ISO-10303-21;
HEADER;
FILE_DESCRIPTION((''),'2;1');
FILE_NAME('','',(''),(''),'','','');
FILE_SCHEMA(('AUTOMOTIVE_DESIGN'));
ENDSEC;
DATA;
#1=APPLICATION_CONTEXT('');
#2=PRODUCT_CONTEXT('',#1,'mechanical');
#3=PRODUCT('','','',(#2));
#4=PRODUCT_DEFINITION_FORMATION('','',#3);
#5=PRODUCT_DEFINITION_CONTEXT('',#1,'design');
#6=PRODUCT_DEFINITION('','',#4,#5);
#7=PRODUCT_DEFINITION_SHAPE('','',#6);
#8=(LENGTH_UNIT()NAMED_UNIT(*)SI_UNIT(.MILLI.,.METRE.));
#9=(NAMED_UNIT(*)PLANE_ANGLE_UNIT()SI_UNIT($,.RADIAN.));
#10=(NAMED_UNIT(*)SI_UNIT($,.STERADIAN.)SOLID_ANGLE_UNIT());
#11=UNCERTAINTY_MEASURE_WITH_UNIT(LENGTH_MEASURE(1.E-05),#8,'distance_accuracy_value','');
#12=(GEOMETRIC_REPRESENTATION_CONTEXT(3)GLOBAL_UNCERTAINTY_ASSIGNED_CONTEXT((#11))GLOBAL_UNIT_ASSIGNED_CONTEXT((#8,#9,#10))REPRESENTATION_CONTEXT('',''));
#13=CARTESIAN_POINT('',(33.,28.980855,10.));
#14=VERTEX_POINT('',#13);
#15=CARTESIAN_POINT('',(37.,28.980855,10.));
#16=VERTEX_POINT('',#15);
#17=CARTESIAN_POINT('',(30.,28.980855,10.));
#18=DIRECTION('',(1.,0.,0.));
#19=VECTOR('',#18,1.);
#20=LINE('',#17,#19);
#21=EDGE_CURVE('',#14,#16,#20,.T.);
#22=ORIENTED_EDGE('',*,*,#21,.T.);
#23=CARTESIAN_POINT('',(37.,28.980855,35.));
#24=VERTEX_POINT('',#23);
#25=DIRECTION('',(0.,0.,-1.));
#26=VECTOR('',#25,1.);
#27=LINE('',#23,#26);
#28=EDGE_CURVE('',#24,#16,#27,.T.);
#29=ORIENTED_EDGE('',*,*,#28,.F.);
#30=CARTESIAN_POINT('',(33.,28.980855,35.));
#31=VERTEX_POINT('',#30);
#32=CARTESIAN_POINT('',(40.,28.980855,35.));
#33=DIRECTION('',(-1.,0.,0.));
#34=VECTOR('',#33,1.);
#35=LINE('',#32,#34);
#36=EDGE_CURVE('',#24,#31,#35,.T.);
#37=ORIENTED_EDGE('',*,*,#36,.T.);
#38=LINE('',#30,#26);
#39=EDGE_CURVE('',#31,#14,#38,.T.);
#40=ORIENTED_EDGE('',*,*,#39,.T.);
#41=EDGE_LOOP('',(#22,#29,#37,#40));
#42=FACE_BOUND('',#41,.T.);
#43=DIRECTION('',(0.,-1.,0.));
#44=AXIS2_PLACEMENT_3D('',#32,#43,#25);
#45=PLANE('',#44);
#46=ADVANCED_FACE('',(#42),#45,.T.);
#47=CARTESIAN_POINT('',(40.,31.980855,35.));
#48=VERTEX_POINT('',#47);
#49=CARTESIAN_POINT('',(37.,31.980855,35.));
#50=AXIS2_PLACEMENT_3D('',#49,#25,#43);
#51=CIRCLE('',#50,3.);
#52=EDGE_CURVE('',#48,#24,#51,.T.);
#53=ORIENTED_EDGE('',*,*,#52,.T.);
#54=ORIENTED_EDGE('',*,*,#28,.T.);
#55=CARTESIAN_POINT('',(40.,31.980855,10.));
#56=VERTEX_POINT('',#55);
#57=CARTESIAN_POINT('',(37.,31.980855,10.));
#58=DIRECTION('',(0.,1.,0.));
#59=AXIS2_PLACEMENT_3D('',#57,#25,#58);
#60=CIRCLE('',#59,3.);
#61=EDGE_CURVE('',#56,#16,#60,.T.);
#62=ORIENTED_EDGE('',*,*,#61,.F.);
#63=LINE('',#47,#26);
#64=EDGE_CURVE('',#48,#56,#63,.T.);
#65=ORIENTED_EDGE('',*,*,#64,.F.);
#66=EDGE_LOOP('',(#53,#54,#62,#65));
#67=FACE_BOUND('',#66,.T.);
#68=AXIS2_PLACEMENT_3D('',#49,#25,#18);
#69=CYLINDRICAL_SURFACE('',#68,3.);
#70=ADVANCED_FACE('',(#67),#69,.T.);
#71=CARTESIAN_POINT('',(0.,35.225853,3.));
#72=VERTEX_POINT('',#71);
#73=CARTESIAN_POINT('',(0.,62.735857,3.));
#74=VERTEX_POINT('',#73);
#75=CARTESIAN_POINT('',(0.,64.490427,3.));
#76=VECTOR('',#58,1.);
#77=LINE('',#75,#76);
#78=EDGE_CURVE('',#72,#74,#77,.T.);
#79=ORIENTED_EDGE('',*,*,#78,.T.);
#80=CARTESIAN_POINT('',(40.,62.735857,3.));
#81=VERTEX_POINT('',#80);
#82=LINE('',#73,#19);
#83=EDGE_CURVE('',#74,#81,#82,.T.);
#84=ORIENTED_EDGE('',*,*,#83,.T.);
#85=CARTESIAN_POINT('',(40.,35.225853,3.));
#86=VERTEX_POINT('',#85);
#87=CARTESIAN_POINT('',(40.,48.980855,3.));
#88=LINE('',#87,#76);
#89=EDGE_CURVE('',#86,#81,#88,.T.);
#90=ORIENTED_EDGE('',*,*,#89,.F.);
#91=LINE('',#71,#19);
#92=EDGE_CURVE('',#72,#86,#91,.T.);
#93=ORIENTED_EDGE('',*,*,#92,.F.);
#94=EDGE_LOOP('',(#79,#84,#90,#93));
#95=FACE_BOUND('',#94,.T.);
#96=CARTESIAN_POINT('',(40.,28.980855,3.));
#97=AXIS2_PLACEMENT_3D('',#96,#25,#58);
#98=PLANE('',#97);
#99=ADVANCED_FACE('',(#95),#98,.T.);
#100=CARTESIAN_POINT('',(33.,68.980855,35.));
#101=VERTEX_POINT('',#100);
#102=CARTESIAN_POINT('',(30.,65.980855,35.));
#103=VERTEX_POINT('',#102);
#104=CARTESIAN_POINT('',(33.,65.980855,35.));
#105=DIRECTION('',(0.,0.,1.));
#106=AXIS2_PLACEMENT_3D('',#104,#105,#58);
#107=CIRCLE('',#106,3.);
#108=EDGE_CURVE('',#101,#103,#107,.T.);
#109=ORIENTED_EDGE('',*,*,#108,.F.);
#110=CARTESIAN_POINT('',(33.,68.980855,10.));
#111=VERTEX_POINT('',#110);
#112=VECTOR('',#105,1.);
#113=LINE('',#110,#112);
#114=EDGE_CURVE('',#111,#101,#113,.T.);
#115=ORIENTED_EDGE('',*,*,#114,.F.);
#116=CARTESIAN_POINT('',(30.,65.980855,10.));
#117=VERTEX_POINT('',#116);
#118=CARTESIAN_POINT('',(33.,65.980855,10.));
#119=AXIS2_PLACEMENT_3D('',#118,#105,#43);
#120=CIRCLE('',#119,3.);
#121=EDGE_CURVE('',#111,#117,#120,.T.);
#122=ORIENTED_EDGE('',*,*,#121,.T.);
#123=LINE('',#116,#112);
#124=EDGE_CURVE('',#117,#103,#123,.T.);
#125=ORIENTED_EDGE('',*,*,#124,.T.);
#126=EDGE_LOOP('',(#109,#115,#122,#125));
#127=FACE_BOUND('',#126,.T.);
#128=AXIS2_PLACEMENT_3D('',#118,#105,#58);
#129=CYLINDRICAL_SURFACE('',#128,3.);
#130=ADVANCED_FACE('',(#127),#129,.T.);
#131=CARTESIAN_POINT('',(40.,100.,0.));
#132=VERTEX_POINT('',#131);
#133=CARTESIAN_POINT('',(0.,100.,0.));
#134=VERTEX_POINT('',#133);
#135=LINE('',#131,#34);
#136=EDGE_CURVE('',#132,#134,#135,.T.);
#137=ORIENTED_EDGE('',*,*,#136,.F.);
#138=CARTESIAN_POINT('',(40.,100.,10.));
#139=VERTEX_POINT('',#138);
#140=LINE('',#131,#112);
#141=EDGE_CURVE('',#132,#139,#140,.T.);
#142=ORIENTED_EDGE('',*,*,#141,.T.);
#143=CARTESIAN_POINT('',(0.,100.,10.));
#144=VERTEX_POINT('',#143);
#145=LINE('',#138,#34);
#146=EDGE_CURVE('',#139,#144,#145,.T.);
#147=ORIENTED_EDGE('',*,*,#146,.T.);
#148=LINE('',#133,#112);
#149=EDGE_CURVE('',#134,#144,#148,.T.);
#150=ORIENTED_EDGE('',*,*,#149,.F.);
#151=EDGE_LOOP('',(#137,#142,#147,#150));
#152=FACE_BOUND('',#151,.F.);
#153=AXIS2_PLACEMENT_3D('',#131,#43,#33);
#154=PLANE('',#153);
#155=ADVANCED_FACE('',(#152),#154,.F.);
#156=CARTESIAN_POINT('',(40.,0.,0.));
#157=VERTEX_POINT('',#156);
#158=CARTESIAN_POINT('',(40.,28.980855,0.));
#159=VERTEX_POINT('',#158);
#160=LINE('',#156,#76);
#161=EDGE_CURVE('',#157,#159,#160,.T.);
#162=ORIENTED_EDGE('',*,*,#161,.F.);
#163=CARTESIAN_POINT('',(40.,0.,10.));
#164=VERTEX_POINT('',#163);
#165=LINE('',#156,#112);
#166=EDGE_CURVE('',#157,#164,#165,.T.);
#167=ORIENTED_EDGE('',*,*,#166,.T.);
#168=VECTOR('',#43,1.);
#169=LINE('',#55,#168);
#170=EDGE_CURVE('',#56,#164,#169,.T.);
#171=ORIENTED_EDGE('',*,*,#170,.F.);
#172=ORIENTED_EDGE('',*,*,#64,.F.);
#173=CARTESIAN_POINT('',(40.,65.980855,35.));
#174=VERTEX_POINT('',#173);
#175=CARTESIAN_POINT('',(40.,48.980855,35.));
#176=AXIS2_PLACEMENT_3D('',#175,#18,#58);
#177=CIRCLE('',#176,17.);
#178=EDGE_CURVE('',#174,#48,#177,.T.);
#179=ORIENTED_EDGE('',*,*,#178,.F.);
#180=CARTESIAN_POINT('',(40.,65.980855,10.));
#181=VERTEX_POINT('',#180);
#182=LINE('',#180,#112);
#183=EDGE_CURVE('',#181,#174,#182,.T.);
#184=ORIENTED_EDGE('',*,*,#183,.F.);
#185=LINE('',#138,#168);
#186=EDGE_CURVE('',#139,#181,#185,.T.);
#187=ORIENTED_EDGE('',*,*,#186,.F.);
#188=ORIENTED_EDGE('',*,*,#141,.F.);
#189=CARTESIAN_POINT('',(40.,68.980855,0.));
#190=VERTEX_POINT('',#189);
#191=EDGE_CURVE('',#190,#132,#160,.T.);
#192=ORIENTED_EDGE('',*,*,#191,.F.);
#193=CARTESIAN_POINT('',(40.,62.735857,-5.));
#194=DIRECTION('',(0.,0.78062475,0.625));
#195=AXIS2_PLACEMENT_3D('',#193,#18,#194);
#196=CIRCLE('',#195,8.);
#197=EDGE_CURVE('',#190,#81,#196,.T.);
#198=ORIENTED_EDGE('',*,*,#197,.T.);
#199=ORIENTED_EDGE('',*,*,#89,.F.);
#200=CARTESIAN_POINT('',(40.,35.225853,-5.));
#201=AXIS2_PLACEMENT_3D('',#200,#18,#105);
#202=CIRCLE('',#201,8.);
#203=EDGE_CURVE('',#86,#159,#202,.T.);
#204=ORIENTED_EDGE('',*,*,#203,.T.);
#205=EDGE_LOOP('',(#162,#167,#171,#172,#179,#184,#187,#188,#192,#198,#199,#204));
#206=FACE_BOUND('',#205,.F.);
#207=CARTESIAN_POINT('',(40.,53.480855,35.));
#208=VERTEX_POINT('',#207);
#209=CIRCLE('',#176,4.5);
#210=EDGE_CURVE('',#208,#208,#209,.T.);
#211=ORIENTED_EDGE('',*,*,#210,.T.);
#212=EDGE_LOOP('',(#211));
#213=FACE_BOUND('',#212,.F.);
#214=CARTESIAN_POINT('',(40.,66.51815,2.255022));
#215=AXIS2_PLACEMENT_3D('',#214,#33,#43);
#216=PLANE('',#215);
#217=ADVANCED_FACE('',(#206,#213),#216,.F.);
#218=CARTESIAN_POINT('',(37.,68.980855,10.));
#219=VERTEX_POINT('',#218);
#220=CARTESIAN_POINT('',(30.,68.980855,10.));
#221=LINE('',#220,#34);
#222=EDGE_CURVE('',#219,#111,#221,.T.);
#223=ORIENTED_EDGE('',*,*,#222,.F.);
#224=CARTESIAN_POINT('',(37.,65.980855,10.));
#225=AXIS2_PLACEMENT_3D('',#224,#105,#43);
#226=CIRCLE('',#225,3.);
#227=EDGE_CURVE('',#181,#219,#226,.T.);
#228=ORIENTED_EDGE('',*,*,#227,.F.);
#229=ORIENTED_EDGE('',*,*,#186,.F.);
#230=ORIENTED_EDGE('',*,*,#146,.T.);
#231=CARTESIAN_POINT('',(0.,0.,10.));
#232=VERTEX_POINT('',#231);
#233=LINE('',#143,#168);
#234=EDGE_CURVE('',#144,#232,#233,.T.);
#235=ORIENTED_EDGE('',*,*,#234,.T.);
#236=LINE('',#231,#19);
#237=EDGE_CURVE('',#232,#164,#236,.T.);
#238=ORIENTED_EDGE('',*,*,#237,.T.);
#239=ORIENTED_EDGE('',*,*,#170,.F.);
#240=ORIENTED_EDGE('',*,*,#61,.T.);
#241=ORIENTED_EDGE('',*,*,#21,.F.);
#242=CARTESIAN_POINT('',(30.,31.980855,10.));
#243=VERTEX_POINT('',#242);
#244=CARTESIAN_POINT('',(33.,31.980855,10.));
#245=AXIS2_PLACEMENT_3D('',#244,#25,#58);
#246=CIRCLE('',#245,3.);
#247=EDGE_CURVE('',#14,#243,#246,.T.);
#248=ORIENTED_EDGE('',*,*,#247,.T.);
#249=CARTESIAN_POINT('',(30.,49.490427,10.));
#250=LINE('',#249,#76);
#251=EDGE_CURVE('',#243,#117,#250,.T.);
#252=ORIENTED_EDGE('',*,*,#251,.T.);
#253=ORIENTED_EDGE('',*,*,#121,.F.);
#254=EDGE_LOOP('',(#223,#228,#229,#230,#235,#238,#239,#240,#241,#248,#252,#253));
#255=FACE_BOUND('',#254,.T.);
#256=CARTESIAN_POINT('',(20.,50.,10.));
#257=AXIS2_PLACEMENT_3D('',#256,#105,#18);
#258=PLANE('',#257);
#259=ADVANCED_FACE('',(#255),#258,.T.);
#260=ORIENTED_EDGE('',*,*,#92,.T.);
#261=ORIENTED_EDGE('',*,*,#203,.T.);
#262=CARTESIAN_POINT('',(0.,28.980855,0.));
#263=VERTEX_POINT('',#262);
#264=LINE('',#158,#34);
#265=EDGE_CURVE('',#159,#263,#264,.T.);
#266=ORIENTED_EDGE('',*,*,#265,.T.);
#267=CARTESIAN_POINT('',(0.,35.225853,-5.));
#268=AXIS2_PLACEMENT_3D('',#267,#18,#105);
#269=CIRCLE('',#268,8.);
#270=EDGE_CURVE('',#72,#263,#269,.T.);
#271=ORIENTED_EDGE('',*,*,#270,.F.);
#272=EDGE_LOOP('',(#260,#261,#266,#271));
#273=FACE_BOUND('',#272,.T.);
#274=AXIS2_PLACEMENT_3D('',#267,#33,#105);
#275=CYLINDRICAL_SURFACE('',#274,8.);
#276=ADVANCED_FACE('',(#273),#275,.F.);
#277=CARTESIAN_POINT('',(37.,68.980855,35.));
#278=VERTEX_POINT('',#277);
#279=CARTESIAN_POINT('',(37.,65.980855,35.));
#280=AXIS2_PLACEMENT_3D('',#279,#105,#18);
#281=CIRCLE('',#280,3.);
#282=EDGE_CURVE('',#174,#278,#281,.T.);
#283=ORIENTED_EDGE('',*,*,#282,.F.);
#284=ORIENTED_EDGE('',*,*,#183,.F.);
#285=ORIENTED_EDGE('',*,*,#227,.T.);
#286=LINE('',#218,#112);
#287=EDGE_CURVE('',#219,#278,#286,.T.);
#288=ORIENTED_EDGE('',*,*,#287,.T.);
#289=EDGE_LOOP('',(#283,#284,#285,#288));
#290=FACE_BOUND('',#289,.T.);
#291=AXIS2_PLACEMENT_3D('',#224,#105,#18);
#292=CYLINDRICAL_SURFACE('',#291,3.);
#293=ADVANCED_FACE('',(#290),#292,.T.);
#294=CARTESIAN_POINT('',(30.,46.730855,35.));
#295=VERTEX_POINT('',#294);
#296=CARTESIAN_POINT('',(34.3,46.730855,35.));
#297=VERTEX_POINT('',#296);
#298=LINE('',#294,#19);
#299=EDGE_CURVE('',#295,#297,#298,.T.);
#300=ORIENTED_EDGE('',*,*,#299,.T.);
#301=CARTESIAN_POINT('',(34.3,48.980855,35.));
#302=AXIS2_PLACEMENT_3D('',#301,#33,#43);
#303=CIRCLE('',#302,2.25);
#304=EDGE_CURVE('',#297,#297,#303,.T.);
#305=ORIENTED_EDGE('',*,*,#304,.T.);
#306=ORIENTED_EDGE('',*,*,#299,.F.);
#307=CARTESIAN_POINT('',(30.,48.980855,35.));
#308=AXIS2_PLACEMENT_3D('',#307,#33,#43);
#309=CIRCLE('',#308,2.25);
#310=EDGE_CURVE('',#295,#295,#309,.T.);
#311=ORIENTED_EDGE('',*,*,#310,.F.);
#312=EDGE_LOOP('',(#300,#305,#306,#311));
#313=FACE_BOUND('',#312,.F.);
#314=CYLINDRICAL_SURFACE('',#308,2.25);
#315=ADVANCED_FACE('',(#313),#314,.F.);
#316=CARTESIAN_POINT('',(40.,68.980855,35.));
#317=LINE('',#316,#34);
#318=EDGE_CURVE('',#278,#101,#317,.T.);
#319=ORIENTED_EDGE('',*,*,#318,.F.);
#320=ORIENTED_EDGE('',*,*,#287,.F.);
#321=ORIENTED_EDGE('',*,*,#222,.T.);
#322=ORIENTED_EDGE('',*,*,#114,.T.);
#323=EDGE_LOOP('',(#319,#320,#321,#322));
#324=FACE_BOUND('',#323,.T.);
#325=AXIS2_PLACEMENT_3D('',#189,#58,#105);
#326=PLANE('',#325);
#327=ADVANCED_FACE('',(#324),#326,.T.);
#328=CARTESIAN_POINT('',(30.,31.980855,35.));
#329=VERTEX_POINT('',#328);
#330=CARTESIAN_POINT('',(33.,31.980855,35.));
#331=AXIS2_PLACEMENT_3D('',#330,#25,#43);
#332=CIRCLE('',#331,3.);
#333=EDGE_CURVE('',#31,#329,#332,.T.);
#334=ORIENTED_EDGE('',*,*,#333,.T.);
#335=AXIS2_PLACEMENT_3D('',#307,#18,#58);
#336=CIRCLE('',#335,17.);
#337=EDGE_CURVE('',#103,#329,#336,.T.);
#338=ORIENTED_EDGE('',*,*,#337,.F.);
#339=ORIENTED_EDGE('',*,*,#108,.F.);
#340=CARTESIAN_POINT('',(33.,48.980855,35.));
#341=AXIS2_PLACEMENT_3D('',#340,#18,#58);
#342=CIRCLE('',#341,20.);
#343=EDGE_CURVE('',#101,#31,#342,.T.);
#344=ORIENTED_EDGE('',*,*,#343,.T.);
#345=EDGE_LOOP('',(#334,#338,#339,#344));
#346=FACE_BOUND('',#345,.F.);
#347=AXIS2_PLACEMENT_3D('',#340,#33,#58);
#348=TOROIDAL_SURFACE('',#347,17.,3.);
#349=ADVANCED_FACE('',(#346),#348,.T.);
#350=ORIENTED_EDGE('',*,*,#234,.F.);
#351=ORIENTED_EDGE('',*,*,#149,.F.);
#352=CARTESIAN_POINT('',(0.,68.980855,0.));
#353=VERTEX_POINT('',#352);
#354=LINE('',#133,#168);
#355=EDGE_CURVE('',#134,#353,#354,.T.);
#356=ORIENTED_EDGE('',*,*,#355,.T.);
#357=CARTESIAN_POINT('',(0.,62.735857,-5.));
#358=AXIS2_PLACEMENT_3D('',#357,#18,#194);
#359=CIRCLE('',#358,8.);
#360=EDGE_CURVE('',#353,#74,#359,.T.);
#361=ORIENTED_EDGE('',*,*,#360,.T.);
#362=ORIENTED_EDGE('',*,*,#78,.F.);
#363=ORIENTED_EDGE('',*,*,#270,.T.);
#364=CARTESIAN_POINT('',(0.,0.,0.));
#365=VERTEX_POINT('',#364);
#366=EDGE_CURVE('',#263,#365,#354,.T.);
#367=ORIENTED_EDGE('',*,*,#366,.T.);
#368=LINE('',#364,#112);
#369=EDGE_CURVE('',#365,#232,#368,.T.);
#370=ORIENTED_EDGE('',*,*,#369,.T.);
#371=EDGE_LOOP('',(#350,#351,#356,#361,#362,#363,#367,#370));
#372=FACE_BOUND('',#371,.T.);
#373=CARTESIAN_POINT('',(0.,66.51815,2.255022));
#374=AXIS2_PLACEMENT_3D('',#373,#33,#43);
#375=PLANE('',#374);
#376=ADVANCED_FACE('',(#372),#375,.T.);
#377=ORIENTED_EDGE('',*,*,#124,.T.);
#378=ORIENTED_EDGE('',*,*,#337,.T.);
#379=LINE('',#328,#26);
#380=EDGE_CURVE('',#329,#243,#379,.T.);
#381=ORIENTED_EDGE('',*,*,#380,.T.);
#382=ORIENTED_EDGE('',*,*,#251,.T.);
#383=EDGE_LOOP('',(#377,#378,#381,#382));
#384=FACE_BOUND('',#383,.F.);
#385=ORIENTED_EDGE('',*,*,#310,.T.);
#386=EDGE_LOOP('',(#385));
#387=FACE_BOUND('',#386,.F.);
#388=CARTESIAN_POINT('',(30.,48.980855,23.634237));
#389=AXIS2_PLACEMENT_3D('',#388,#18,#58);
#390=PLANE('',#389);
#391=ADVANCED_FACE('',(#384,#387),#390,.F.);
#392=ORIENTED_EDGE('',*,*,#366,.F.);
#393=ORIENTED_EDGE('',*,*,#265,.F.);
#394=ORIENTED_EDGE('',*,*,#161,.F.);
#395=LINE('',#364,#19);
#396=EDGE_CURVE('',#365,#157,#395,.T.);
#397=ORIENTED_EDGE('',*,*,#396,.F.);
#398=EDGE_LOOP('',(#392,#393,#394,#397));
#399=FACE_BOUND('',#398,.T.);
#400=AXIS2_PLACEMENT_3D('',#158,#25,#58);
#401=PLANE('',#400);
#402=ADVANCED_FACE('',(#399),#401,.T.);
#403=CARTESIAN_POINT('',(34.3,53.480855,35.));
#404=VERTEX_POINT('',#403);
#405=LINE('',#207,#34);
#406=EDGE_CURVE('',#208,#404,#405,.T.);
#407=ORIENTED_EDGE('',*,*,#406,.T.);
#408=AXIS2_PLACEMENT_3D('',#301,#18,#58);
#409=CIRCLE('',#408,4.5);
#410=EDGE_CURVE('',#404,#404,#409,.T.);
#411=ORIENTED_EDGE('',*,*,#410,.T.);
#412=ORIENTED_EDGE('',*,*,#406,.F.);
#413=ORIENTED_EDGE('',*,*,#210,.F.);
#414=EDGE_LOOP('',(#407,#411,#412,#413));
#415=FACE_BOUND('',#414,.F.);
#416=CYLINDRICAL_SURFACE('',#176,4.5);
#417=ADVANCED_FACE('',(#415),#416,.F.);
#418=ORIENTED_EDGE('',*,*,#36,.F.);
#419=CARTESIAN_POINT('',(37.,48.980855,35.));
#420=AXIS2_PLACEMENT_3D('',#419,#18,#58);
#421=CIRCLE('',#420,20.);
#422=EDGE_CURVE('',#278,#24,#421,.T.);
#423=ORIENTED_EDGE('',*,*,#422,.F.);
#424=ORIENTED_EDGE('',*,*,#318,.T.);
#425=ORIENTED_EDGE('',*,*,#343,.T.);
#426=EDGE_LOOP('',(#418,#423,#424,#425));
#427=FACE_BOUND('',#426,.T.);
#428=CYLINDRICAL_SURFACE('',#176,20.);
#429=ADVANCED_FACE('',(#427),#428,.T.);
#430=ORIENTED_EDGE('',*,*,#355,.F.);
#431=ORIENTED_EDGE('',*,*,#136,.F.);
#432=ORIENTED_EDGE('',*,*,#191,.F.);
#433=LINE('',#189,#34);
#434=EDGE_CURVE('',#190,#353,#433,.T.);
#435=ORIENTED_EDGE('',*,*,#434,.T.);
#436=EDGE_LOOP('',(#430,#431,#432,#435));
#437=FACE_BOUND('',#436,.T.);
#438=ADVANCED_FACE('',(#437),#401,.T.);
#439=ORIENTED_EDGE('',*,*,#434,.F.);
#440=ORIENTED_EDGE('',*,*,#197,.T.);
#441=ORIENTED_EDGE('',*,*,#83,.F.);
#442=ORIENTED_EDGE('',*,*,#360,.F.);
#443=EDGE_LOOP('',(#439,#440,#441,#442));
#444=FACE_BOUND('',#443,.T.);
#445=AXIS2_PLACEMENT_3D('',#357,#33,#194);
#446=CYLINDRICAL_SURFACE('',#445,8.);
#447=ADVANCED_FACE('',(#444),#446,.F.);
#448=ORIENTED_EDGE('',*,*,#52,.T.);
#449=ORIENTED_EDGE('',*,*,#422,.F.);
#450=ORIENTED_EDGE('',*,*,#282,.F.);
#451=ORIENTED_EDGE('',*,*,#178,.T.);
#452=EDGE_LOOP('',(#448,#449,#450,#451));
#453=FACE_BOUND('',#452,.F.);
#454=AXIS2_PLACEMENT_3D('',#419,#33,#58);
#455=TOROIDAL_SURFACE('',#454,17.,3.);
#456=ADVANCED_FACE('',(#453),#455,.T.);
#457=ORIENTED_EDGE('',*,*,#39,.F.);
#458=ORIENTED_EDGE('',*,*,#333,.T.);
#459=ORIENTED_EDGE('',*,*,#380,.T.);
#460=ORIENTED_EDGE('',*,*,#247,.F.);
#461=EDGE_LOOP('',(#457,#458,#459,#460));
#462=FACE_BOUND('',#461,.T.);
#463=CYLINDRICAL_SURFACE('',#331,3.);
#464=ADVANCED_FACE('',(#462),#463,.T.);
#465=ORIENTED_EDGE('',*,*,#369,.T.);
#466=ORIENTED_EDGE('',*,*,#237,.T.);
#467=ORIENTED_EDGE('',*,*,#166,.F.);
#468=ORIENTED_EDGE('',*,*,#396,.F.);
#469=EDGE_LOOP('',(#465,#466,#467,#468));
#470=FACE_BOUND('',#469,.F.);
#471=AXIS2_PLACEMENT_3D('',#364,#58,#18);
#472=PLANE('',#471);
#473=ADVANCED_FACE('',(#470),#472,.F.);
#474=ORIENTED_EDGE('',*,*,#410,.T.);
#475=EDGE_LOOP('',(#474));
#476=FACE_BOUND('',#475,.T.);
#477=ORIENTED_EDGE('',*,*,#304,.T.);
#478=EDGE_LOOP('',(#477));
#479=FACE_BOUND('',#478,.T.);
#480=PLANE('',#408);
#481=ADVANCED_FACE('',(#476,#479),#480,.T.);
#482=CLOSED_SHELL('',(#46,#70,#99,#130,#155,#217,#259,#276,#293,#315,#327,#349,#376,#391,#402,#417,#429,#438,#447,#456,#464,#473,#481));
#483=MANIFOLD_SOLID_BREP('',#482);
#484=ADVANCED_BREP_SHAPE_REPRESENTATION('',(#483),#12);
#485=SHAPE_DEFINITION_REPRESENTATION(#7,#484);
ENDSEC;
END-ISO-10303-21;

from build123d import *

# Parameters (mm, degrees)
F1_DEPTH     = 10
F3_DEPTH     = 10
F4_R         = 2.25
F5_DEPTH     = 10.001
F6_W         = 40
F6_H         = 3
F7_DEPTH     = 40.001
F8_R         = 4.5
F9_DEPTH     = 5.7
F10_T1_DEPTH = 40
F11_R        = 3


# Not quite as in the source:
# - a fillet or chamfer that OpenCascade refuses, or shapes differently, is made with other operations: its cross-section is extruded or revolved along the edge and cut away or added


with BuildPart() as f1:
    # F0 (on Top) → F1 (new body)
    with BuildSketch(Plane.XY):
        Polygon((0, 100), (0, 0), (40, 0), (40, 96.7579462998), (40, 100), align=None)
    extrude(amount=F1_DEPTH)

    # F2 (on face) → F3 (join)
    with BuildSketch(Plane.YZ.offset(40)):
        with BuildLine():
            Line((28.9808548987, 35), (28.9808548987, 0))
            Line((28.9808548987, 0), (68.9808548987, 0))
            Line((68.9808548987, 0), (68.9808548987, 35))
            ThreePointArc((68.9808548987, 35), (48.9808548987, 55), (28.9808548987, 35))
        make_face()
    extrude(amount=-F3_DEPTH)

    # F4 (on face) → F5 (cut, through all)
    with BuildSketch(Plane(origin=(30, 0, 0), x_dir=(0, -1, 0), z_dir=(-1, 0, 0))):
        with Locations((-48.9808548987, 35)):
            Circle(F4_R)
    extrude(amount=-F5_DEPTH, mode=Mode.SUBTRACT)

    # F6 (on face) → F7 (cut, through all)
    with BuildSketch(Plane.YZ.offset(40)):
        with Locations((48.9808548987, 1.5)):
            Rectangle(F6_W, F6_H)
    extrude(amount=-F7_DEPTH, mode=Mode.SUBTRACT)

    # F8 (on face) → F9 (cut)
    with BuildSketch(Plane.YZ.offset(40)):
        with Locations((48.9808548987, 35)):
            Circle(F8_R)
    extrude(amount=-F9_DEPTH, mode=Mode.SUBTRACT)

    # F10: fillet of radius 8 on 2 edges, made by hand

    # F10_s2 → F10_t1 (join)
    with BuildSketch(Plane.YZ):
        with BuildLine():
            ThreePointArc((68.9808548987, 0), (66.1999585154, 2.2111025509), (62.7358569003, 3))
            Line((62.7358569003, 3), (68.9808548987, 3))
            Line((68.9808548987, 3), (68.9808548987, 0))
        make_face()
        with BuildLine():
            ThreePointArc((35.2258528971, 3), (31.761751282, 2.2111025509), (28.9808548987, 0))
            Line((28.9808548987, 0), (28.9808548987, 3))
            Line((28.9808548987, 3), (35.2258528971, 3))
        make_face()
    extrude(amount=F10_T1_DEPTH)

    # F11
    f11_edges = [f1.edges().sort_by_distance(p)[0] for p in [
        (40, 68.980855, 22.5),
        (30, 68.980855, 22.5),
        (40, 28.980855, 22.5),
        (40, 48.980855, 55),
        (30, 48.980855, 55),
        (30, 28.980855, 22.5),
    ]]
    fillet(f11_edges, radius=F11_R)


solid = f1.part
